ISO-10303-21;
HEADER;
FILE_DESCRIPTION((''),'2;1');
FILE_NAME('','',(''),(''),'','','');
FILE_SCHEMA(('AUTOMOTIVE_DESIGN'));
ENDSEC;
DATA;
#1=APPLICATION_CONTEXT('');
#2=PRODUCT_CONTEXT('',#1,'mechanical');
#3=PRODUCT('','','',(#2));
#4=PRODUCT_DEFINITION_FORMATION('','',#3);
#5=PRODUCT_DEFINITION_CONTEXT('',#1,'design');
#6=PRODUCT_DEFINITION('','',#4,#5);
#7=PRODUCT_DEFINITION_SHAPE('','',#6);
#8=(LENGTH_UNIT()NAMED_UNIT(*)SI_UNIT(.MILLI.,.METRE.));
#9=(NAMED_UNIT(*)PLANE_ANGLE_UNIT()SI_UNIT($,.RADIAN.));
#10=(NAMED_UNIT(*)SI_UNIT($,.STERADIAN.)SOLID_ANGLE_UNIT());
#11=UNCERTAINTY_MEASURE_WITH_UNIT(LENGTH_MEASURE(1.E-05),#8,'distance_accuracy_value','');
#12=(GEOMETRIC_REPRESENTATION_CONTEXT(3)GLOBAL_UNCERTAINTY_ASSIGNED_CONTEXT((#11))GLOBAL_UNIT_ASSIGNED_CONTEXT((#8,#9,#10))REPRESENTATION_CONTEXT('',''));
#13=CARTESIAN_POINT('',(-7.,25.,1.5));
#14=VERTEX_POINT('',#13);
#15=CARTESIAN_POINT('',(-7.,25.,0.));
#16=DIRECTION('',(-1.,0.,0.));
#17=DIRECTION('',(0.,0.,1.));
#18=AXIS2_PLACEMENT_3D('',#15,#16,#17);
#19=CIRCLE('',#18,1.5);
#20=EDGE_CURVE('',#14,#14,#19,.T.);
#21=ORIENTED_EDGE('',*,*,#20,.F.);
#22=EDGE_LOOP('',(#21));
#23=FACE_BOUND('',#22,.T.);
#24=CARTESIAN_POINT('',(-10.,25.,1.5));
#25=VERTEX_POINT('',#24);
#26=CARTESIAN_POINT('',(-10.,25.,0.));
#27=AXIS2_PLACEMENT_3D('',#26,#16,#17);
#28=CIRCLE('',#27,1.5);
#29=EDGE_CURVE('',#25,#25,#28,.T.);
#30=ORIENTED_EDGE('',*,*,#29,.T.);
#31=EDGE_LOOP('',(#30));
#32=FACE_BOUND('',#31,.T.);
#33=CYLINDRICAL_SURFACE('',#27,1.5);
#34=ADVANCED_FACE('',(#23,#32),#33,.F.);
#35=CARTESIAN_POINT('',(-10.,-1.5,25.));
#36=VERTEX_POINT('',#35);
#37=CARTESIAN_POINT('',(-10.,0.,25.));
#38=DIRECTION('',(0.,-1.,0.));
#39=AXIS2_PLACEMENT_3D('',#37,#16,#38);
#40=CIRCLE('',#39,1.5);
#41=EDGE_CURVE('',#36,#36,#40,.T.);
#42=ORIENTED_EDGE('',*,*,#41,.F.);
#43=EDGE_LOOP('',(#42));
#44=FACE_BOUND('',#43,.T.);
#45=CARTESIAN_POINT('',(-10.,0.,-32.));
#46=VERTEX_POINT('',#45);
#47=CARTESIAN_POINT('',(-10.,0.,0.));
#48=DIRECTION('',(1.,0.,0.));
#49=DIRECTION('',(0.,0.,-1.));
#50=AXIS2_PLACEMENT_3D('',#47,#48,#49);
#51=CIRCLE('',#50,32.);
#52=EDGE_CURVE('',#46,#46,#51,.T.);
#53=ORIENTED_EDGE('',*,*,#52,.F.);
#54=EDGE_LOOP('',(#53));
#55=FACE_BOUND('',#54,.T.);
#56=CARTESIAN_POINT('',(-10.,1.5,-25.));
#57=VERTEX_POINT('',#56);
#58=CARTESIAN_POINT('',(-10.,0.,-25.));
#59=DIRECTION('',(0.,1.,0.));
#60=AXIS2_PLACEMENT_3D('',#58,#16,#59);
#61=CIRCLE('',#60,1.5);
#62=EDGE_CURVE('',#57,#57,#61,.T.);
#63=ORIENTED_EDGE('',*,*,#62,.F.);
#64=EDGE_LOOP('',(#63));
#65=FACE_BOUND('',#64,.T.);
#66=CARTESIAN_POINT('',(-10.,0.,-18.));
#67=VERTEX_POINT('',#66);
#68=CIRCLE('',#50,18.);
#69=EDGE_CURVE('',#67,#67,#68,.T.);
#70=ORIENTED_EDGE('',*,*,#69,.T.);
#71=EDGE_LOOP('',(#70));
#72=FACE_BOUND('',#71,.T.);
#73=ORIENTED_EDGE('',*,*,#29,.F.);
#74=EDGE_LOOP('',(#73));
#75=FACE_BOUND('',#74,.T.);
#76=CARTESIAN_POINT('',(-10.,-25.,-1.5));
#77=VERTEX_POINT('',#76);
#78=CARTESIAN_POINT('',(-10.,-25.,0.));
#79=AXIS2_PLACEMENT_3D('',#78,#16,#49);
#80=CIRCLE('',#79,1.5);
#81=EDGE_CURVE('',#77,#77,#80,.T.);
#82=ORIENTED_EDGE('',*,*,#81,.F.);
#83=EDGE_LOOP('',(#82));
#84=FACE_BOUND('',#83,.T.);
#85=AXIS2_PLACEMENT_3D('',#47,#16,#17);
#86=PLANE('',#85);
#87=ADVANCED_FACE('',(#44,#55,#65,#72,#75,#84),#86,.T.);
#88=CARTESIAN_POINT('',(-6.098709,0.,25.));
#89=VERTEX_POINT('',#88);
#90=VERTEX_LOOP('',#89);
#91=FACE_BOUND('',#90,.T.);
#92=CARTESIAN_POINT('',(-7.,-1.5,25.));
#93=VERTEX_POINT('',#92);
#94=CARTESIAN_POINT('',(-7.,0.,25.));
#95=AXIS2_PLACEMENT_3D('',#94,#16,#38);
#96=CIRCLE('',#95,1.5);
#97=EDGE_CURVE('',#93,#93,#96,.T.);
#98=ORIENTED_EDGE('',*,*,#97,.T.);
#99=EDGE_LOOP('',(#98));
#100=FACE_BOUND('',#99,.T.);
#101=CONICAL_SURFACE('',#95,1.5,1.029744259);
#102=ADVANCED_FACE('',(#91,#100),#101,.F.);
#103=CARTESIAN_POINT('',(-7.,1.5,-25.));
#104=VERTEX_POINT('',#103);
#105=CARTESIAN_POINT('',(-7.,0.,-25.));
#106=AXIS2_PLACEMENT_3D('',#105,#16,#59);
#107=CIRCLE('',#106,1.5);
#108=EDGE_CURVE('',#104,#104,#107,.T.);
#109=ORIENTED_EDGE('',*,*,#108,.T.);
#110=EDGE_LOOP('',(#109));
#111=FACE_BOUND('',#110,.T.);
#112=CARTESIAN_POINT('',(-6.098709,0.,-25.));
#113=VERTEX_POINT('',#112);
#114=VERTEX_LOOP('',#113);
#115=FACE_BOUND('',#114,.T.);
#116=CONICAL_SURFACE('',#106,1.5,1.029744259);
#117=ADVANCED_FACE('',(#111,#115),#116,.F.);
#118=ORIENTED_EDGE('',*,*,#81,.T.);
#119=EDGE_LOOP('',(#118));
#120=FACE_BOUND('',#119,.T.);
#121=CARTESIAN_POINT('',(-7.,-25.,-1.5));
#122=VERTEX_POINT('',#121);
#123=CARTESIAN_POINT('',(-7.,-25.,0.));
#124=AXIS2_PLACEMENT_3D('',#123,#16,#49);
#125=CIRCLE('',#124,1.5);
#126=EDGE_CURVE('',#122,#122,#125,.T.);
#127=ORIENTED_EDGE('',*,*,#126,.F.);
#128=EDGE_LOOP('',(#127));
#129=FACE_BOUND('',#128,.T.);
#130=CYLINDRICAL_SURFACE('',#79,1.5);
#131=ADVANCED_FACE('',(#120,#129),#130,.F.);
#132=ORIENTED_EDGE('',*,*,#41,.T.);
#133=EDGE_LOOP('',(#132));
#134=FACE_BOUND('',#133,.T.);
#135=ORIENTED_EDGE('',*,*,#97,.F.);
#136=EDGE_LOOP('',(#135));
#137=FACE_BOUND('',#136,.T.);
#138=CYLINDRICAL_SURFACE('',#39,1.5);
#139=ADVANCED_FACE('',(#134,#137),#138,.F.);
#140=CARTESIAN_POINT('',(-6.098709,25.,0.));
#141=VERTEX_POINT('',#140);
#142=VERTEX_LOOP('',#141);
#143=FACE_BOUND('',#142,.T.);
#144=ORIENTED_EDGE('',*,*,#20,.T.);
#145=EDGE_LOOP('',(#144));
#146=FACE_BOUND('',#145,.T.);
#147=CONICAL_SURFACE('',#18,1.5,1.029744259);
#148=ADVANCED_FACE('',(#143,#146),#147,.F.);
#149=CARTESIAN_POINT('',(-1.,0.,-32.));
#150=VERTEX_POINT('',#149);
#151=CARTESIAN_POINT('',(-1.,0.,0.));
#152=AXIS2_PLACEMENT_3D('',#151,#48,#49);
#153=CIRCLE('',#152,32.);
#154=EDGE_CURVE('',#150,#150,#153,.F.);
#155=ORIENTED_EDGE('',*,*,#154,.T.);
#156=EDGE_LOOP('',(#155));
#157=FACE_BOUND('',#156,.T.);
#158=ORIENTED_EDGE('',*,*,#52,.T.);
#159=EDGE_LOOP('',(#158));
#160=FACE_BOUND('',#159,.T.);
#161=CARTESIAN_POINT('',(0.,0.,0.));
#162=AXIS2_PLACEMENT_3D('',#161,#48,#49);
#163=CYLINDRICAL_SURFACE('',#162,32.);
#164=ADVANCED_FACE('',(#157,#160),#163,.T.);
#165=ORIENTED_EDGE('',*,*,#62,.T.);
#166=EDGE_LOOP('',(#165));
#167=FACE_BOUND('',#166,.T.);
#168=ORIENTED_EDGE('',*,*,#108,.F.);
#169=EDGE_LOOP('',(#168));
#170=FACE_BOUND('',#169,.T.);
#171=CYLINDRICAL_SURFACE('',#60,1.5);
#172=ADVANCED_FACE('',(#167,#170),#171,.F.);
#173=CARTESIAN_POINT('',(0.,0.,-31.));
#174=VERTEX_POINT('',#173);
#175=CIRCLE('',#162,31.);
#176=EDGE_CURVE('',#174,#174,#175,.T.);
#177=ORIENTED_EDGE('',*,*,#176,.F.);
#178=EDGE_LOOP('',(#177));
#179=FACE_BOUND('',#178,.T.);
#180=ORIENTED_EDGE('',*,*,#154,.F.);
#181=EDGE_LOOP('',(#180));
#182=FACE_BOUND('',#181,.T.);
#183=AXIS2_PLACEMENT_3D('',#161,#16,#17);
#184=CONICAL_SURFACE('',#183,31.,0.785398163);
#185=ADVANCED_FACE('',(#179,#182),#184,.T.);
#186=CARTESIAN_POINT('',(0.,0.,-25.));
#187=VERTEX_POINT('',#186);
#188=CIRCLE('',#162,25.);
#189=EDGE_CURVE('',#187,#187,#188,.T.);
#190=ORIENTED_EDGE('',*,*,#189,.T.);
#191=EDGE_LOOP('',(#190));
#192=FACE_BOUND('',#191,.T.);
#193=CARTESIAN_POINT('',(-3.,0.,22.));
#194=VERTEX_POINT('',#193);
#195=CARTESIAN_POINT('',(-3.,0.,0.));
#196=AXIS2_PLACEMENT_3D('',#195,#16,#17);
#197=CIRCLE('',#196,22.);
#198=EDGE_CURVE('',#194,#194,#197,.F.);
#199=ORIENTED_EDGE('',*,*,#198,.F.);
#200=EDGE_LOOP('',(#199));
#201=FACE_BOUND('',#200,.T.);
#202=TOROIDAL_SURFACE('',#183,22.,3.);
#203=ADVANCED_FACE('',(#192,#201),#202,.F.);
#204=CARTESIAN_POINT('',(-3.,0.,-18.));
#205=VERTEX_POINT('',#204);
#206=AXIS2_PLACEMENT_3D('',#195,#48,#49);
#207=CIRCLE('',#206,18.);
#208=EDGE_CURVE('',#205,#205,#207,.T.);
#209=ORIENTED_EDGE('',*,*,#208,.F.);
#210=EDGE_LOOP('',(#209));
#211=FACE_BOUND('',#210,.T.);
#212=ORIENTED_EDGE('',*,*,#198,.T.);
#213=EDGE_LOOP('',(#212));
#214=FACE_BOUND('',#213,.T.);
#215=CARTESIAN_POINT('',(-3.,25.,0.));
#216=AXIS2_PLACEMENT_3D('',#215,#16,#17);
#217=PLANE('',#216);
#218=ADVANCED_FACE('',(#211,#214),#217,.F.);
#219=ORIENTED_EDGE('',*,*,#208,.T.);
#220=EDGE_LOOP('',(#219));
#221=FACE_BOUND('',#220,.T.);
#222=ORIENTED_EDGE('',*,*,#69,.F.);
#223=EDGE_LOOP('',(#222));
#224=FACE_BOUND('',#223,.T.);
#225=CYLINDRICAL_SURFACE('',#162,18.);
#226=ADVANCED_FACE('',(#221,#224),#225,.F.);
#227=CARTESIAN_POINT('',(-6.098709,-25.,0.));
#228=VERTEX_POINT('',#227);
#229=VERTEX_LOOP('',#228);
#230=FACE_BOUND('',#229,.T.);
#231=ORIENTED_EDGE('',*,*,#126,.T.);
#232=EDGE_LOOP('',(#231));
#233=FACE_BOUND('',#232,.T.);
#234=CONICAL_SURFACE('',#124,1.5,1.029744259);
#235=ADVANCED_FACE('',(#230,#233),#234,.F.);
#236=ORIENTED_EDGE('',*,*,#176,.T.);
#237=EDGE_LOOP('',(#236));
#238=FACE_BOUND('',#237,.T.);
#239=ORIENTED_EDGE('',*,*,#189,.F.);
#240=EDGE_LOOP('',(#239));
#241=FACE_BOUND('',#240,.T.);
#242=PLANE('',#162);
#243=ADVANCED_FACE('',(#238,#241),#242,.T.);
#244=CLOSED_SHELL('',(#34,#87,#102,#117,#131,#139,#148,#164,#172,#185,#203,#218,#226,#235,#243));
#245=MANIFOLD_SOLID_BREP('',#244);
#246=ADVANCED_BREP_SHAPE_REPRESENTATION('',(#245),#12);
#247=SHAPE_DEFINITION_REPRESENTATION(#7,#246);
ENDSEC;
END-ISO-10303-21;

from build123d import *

# Parameters (mm, degrees)
SKETCH1_W         = 10
SKETCH1_H         = 32
FILLET1_R         = 3
CIRPATTERN1_COUNT = 4
CHAMFER1_SIZE     = 1


with BuildPart() as part:
    # Sketch1 → Revolve1 (revolve)
    with BuildSketch(Plane.XY, mode=Mode.PRIVATE) as revolve1_sk:
        with Locations((-5, 16)):
            Rectangle(SKETCH1_W, SKETCH1_H)
    revolve(revolve1_sk.sketch.rotate(Axis((0, 0, 0), (-1, 0, 0)), 90), axis=Axis((0, 0, 0), (-1, 0, 0)))

    # Sketch2 → Cut-Revolve1 (revolve, cut)
    with BuildSketch(Plane.XY, mode=Mode.PRIVATE) as cut_revolve1_sk:
        Polygon((0, 0), (0, 25), (-3, 25), (-3, 18), (-10, 18), (-10, 0), align=None)
    revolve(cut_revolve1_sk.sketch.rotate(Axis((0, 0, 0), (-1, 0, 0)), 90), axis=Axis((0, 0, 0), (-1, 0, 0)), mode=Mode.SUBTRACT)

    # Fillet1
    fillet1_edges = [part.edges().sort_by_distance(p)[0] for p in [
        (-3, 0, 25),
    ]]
    fillet(fillet1_edges, radius=FILLET1_R - 0.0001)  # a hair under: the kernel refuses the full size

    # Sketch4 → Ø3.0mm Dowel Hole1 (revolve, cut)
    with BuildSketch(Plane(origin=(-10, 25, 0), x_dir=(0, 0, 1), z_dir=(0, 1, 0))):
        Polygon((0, 0), (0, 3.901290929), (1.5, 3), (1.5, 0), align=None)
    f_3_0mm_dowel_hole1 = revolve(axis=Axis((-16.35, 25, 0), (1, 0, 0)), mode=Mode.SUBTRACT)

    # CirPattern1: Ø3.0mm Dowel Hole1 ×4 about axis
    cirpattern1_axis = Axis((0, 0, 0), (1, 0, 0))
    for i in range(1, CIRPATTERN1_COUNT):
        add(f_3_0mm_dowel_hole1.rotate(cirpattern1_axis, i * 360 / CIRPATTERN1_COUNT), mode=Mode.SUBTRACT)

    # Chamfer1
    chamfer1_edges = [part.edges().sort_by_distance(p)[0] for p in [
        (0, 0, 32),
    ]]
    chamfer(chamfer1_edges, length=CHAMFER1_SIZE)


solid = part.part
